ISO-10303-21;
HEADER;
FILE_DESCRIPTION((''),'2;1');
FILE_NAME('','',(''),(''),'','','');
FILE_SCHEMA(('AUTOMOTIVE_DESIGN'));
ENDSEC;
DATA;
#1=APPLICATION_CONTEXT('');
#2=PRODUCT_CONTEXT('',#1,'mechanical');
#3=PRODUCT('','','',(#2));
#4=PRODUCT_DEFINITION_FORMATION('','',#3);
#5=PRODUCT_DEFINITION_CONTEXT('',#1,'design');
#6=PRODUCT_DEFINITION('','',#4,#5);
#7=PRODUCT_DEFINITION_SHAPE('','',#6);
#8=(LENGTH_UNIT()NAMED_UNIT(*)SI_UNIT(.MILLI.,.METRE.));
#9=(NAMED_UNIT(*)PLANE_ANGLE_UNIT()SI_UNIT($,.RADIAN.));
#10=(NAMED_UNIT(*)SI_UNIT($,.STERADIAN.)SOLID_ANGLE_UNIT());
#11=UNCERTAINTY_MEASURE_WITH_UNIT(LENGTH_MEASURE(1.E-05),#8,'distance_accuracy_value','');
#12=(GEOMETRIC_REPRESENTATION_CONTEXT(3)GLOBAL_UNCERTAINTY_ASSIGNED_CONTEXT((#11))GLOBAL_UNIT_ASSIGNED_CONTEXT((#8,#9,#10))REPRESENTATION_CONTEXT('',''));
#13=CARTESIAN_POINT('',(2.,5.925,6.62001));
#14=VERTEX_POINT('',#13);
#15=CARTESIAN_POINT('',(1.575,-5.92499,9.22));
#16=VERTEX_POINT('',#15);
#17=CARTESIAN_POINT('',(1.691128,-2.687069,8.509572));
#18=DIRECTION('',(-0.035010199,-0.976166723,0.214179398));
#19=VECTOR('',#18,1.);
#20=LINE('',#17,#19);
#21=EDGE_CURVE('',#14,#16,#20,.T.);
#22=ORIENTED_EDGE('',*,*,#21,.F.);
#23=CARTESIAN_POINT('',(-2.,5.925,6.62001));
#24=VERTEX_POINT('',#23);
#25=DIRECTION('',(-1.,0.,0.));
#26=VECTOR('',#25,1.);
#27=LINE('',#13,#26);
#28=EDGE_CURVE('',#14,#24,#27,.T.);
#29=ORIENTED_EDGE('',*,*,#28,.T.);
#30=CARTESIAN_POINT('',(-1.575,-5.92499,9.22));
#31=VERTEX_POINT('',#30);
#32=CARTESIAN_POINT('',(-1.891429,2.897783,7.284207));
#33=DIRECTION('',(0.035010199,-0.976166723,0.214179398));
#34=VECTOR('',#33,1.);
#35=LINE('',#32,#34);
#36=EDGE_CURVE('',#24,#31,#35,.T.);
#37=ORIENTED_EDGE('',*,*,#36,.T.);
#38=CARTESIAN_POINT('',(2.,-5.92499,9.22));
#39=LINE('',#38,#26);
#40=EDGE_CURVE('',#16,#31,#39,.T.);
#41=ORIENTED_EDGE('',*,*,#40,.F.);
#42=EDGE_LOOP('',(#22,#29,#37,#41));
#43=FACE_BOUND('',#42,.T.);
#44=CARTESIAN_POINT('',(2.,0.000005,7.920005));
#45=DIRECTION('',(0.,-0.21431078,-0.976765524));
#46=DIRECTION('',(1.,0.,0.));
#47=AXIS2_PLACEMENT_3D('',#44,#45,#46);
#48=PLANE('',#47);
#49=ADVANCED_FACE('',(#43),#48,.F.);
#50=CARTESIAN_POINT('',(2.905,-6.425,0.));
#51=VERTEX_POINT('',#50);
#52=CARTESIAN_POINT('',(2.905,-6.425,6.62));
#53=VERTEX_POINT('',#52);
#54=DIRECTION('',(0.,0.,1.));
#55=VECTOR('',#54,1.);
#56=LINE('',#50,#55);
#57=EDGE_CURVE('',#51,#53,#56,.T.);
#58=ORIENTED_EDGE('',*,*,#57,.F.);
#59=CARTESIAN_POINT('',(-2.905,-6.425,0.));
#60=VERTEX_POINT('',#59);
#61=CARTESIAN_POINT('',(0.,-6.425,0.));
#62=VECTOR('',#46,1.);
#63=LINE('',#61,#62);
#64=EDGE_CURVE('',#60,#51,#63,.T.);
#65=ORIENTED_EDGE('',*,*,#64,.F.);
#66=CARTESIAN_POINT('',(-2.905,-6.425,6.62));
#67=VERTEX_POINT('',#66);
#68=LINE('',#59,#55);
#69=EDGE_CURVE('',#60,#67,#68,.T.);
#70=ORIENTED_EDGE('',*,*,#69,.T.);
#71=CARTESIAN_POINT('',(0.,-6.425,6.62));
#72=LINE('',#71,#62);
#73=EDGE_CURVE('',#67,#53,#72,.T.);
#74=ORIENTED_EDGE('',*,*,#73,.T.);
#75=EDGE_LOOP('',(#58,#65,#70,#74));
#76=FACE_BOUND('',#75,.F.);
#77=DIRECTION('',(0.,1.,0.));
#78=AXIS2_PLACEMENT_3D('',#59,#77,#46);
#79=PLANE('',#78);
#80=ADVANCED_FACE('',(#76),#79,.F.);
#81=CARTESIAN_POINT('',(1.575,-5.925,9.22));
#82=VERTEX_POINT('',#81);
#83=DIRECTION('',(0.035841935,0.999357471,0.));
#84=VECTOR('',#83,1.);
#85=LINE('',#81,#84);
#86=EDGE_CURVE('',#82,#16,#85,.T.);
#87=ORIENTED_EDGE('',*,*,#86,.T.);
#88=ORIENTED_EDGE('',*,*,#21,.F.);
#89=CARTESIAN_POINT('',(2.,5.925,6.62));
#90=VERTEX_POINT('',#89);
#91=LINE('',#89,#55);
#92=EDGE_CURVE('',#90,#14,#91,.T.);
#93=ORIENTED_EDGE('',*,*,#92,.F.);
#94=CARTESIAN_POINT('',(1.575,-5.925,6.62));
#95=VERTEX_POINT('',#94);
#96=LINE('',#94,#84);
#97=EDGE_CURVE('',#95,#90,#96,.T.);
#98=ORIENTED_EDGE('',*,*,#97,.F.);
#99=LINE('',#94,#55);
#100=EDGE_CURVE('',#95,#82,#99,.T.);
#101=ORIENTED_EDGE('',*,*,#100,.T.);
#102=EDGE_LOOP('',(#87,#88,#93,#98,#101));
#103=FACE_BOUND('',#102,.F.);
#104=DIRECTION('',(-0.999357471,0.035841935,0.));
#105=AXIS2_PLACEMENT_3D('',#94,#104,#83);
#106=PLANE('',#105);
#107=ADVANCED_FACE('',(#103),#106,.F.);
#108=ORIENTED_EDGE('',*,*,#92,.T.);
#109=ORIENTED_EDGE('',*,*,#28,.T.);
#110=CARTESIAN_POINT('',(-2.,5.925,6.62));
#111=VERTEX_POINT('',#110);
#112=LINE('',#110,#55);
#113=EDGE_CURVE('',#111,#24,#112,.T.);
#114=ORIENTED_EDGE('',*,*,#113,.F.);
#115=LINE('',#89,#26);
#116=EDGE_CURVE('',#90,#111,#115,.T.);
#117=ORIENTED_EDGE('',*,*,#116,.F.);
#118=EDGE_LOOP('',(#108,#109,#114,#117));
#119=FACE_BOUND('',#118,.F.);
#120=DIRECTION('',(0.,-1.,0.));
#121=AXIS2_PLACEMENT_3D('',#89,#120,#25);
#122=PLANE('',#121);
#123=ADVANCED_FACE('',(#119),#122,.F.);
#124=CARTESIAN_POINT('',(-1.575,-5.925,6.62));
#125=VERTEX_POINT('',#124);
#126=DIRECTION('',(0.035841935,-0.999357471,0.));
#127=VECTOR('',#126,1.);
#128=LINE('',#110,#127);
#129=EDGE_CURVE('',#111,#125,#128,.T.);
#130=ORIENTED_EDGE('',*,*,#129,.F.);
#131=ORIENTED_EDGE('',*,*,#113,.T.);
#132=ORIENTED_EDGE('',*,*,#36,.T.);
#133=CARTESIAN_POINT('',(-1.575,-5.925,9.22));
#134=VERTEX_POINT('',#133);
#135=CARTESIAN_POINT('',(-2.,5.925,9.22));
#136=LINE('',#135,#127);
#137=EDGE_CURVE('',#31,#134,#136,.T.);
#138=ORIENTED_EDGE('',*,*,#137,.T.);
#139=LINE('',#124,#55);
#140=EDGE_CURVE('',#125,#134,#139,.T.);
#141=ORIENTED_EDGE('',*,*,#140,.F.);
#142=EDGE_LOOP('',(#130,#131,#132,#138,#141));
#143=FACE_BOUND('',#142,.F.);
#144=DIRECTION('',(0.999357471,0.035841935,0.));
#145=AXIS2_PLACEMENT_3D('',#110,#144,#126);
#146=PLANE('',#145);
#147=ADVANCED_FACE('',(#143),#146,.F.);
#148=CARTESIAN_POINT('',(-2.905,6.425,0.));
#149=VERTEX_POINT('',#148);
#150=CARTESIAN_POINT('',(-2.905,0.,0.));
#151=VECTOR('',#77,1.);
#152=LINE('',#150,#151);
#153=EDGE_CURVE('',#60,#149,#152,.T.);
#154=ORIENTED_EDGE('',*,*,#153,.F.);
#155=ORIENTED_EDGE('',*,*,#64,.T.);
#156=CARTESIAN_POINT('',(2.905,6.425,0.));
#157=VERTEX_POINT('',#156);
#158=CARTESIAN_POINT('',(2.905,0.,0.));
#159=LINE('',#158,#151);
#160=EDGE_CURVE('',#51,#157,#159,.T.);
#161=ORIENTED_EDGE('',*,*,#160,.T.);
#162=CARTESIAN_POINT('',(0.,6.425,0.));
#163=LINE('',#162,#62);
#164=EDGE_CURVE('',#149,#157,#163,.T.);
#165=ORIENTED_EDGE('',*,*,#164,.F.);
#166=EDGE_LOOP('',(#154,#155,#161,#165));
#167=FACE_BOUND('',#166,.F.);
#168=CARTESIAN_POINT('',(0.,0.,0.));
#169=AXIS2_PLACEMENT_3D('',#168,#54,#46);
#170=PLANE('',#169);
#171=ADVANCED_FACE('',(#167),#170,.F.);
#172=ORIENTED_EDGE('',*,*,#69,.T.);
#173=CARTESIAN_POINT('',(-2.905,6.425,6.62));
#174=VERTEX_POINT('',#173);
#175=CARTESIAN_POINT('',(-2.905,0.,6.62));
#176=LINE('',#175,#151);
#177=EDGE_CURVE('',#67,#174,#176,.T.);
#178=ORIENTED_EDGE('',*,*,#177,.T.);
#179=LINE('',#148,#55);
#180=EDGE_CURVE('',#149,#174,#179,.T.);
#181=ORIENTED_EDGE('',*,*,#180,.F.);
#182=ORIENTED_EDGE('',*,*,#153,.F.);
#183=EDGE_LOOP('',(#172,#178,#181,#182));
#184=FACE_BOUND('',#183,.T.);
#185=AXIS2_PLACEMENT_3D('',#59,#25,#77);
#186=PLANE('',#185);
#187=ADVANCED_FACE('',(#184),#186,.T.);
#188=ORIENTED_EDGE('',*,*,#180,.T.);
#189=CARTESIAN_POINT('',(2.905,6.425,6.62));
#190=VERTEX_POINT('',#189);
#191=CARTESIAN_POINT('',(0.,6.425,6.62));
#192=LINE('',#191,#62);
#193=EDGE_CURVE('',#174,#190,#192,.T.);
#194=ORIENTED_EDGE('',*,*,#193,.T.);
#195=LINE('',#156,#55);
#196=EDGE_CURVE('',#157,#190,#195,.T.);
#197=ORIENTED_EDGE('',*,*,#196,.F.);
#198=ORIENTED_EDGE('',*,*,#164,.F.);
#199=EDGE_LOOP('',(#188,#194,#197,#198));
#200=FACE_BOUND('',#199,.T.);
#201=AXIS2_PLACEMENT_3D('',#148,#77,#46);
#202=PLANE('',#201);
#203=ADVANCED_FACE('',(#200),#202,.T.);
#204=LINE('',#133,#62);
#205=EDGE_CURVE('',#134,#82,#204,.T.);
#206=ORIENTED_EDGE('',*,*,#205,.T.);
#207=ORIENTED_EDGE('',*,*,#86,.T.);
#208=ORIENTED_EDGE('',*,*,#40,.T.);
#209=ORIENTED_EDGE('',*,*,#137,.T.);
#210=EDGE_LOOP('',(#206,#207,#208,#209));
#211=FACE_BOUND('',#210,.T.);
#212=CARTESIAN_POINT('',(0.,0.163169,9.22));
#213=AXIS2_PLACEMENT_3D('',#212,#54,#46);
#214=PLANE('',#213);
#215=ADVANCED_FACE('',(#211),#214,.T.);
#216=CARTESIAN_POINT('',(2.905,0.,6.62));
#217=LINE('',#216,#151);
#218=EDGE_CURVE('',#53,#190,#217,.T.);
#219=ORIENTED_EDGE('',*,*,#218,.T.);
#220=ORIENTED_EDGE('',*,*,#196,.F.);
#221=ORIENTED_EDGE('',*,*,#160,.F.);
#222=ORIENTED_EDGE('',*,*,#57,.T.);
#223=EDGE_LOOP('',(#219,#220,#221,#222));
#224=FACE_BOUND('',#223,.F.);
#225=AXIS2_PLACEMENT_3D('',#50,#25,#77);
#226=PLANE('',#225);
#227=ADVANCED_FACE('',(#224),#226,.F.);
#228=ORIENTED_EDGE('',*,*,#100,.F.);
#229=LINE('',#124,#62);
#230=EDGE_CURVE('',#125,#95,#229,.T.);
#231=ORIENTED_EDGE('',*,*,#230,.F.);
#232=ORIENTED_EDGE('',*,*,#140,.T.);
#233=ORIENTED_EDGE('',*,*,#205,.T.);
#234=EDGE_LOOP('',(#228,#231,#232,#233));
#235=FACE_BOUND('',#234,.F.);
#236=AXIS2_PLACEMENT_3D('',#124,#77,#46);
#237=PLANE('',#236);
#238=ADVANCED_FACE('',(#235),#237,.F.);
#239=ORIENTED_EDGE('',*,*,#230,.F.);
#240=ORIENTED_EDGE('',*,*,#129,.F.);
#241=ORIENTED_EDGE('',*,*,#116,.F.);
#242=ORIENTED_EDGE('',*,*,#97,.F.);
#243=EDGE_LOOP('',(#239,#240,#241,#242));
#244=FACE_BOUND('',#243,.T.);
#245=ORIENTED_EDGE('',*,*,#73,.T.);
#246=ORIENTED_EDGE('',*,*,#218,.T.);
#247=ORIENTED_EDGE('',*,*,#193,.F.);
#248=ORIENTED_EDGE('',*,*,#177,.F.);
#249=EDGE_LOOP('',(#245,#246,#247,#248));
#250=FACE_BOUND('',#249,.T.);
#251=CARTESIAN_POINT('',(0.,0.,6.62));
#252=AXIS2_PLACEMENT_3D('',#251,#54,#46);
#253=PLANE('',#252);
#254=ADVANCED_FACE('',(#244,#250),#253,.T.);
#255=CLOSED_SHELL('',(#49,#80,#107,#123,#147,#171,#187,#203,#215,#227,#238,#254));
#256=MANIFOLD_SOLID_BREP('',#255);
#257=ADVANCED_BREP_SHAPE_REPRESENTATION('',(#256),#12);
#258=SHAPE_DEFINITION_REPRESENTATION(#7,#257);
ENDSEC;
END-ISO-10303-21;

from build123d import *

# Parameters (mm, degrees)
F2_W     = 5.81
F2_H     = 12.85
F3_DEPTH = 6.62
F6_DEPTH = 2.6
F7_SIZE2 = 11.84999
F7_SIZE  = 2.59999


# Not quite as in the source:
# - a fillet or chamfer is up to 0.001 mm smaller than in the source, because OpenCascade refuses the exact size


with BuildPart() as f3:
    # F2 (on Top) → F3 (new body)
    with BuildSketch(Plane.XY):
        Rectangle(F2_W, F2_H)
    extrude(amount=F3_DEPTH)

    # F4 (on face) → F6 (join)
    with BuildSketch(Plane.XY.offset(6.62)):
        Polygon((2, 5.925), (-2, 5.925), (-1.575, -5.925), (1.575, -5.925), align=None)
    extrude(amount=F6_DEPTH)

    # F7 (size 2.6 and 11.85 in the source; OpenCascade refuses exactly that, so slightly less here)
    f7_edges = [f3.edges().sort_by_distance(p)[0] for p in [
        (0, 5.925, 9.22),
    ]]
    f7_side = f3.faces().sort_by_distance((0, 5.925, 7.92))[0]
    chamfer(f7_edges, length=F7_SIZE, length2=F7_SIZE2, reference=f7_side)


solid = f3.part
